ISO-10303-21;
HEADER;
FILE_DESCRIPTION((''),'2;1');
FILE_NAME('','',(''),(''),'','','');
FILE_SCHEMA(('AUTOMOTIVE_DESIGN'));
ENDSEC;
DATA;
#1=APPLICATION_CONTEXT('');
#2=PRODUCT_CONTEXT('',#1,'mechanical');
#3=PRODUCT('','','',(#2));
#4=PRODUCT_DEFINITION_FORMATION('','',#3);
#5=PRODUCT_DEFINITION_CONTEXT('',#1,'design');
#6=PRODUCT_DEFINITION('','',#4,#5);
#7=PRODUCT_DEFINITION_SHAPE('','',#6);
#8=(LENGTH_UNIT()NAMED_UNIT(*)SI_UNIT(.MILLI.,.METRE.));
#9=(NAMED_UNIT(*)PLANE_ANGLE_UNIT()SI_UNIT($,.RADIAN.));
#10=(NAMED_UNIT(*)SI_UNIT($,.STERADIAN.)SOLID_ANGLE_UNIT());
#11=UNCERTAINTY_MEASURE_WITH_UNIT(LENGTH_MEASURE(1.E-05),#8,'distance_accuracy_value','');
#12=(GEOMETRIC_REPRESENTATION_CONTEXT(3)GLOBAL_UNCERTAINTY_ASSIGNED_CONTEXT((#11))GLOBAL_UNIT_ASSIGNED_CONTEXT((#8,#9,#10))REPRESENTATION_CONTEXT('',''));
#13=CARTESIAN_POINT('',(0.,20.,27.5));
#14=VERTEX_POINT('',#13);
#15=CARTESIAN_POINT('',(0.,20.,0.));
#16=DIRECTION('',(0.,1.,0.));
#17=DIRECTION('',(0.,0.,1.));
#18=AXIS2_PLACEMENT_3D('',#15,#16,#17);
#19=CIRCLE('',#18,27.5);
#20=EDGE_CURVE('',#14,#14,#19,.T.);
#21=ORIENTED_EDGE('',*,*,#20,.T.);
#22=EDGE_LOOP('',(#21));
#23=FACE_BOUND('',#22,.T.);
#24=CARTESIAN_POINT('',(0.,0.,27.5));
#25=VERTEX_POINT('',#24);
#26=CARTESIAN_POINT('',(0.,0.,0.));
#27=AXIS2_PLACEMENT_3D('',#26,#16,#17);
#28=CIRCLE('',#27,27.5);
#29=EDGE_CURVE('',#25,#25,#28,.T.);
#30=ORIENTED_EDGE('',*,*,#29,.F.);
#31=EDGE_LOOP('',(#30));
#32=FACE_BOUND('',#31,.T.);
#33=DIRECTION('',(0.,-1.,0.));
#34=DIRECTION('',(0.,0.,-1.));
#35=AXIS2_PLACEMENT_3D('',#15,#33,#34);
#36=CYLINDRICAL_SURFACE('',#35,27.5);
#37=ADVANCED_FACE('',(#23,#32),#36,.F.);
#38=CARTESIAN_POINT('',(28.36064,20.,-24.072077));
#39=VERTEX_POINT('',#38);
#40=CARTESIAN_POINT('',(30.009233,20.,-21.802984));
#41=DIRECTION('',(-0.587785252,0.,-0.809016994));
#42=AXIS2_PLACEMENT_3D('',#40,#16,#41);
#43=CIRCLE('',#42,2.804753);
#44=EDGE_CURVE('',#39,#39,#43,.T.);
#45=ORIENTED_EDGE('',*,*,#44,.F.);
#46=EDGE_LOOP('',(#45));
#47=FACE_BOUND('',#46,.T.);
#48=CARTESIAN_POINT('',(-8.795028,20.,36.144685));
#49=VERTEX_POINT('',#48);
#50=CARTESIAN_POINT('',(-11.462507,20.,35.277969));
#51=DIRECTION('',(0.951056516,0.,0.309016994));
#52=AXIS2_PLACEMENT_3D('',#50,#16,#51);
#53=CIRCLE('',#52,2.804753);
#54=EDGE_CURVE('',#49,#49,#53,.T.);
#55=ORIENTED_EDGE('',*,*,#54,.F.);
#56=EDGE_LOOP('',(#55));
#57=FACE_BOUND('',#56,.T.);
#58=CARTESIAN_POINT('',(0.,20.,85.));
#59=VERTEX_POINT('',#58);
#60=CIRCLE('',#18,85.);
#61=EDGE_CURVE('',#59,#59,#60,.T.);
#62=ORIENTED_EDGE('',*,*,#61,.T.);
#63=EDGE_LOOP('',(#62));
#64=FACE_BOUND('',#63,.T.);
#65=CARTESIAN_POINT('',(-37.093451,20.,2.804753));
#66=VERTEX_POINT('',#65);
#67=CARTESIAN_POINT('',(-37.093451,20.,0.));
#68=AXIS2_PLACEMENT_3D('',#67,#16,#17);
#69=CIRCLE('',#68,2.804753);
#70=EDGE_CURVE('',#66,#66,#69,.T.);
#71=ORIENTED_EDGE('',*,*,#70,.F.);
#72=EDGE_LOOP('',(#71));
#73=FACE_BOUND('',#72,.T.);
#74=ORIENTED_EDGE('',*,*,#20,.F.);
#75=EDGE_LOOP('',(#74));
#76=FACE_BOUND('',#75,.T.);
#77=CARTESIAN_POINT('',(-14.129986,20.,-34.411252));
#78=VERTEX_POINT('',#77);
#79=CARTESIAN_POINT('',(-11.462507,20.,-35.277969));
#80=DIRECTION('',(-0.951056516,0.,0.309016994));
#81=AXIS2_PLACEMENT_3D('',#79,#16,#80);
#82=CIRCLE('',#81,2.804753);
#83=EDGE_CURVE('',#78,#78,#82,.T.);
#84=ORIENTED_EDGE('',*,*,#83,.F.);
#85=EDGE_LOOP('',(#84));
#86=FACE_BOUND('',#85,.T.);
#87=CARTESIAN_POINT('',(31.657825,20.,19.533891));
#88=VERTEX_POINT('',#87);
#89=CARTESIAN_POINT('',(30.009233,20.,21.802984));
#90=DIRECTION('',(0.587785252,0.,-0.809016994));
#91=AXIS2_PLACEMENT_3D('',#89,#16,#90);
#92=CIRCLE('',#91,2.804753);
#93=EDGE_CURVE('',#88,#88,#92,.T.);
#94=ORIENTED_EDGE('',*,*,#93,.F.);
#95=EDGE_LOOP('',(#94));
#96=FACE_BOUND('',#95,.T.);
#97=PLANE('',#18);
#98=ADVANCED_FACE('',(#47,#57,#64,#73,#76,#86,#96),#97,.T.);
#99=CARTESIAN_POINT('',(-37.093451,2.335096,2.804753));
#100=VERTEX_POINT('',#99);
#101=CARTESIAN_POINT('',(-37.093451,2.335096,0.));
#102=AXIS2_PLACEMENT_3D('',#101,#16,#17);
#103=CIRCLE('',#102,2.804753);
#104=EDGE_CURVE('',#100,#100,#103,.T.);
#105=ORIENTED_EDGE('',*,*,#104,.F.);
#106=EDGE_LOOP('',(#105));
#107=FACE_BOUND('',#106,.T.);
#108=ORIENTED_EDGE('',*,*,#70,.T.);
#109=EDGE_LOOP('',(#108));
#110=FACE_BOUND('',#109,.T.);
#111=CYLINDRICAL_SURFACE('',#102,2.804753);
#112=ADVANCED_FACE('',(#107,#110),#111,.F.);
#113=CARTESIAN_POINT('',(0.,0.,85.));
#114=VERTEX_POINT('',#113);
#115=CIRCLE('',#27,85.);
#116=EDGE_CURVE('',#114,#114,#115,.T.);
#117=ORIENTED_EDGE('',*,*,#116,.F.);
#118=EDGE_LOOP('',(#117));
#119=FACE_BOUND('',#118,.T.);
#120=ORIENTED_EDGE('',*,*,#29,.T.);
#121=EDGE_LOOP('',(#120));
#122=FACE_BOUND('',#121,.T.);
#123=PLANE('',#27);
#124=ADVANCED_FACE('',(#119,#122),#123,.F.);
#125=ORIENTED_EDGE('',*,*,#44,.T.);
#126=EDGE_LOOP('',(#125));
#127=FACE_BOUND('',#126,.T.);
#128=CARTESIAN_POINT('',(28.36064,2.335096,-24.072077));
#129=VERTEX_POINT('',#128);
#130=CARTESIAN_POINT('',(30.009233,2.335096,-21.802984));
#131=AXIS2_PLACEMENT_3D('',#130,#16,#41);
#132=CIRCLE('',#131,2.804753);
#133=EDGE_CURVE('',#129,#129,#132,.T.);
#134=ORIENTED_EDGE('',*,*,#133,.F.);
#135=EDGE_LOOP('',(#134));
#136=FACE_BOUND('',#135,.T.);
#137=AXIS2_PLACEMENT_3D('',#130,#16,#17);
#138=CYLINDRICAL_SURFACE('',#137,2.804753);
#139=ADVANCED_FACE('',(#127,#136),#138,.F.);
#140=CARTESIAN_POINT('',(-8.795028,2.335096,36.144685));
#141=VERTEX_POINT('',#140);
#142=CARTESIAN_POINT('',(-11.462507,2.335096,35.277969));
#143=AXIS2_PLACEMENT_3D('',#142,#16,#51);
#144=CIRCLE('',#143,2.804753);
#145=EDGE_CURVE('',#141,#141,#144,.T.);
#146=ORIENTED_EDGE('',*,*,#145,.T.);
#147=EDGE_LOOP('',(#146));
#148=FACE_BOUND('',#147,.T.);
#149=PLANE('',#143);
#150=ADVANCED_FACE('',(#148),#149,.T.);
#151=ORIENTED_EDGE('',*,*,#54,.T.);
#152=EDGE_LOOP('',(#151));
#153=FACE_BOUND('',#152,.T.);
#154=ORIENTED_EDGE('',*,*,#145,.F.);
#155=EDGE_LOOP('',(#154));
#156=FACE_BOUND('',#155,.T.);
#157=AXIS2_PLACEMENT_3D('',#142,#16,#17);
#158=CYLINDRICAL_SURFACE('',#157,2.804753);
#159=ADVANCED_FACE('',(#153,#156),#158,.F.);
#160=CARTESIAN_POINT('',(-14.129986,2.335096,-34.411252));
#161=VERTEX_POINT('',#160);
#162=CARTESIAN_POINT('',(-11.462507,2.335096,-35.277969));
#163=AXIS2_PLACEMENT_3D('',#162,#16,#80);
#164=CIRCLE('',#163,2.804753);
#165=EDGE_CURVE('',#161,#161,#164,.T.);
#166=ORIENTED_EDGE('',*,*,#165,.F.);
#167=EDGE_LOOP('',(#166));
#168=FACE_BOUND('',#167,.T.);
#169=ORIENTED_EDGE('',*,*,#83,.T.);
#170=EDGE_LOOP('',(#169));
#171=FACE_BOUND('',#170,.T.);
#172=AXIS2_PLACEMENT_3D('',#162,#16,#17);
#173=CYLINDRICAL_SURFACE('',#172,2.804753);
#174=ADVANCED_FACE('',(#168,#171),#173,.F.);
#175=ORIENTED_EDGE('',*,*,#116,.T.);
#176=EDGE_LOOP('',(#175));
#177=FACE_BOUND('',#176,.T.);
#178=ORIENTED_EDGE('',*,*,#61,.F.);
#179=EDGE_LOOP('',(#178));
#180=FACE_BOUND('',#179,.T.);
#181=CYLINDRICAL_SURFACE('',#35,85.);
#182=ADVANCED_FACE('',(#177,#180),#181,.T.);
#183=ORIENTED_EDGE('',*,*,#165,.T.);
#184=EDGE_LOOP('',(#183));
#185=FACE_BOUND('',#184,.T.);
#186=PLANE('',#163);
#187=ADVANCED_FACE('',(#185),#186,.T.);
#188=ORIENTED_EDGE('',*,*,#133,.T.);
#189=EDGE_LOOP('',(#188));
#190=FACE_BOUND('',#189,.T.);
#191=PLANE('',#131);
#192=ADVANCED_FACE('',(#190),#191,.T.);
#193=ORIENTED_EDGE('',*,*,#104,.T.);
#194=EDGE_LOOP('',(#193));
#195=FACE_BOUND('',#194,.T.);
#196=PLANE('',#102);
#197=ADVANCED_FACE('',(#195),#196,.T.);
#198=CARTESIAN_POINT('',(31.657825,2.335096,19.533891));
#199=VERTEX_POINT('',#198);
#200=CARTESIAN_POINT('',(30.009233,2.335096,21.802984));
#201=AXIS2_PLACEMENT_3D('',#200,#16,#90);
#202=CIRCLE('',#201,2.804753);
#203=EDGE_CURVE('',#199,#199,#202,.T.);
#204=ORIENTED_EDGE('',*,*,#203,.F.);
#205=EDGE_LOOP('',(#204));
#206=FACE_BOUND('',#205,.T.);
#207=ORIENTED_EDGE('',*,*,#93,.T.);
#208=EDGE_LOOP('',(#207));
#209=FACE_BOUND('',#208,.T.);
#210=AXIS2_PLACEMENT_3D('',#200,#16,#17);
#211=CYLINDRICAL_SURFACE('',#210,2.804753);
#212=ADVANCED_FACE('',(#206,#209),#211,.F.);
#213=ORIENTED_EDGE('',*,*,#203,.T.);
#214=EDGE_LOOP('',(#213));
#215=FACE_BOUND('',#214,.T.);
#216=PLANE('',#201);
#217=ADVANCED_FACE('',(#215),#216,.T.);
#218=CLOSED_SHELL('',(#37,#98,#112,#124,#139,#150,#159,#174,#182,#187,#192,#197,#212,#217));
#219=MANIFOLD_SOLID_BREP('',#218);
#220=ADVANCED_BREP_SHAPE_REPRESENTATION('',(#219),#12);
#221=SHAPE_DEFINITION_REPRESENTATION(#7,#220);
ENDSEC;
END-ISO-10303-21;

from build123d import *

# Parameters (mm, degrees)
SKETCH1_R           = 85
BOSS_EXTRUDE1_DEPTH = 20
SKETCH2_R           = 27.5
CUT_EXTRUDE1_DEPTH  = 122.86057607
SKETCH3_R           = 2.80475321
CUT_EXTRUDE2_DEPTH  = 17.664904326
CIRPATTERN1_COUNT   = 5


with BuildPart() as part:
    # Sketch1 → Boss-Extrude1 (new body)
    with BuildSketch(Plane(origin=(0, 0, 0), x_dir=(1, 0, 0), z_dir=(0, 1, 0))):
        Circle(SKETCH1_R)
    extrude(amount=BOSS_EXTRUDE1_DEPTH)

    # Sketch2 → Cut-Extrude1 (cut, through all)
    with BuildSketch(Plane(origin=(0, 0, 0), x_dir=(1, 0, 0), z_dir=(0, 1, 0))):
        Circle(SKETCH2_R)
    extrude(amount=CUT_EXTRUDE1_DEPTH, mode=Mode.SUBTRACT)

    # Sketch3 → Cut-Extrude2 (cut)
    with BuildSketch(Plane(origin=(0, 20, 0), x_dir=(1, 0, 0), z_dir=(0, 1, 0))):
        with Locations((-37.09345141, 0)):
            Circle(SKETCH3_R)
    cut_extrude2 = extrude(amount=-CUT_EXTRUDE2_DEPTH, mode=Mode.SUBTRACT)

    # CirPattern1: Cut-Extrude2 ×5 about axis
    cirpattern1_axis = Axis((0, 0, 0), (0, 1, 0))
    for i in range(1, CIRPATTERN1_COUNT):
        add(cut_extrude2.rotate(cirpattern1_axis, i * 360 / CIRPATTERN1_COUNT), mode=Mode.SUBTRACT)


solid = part.part
